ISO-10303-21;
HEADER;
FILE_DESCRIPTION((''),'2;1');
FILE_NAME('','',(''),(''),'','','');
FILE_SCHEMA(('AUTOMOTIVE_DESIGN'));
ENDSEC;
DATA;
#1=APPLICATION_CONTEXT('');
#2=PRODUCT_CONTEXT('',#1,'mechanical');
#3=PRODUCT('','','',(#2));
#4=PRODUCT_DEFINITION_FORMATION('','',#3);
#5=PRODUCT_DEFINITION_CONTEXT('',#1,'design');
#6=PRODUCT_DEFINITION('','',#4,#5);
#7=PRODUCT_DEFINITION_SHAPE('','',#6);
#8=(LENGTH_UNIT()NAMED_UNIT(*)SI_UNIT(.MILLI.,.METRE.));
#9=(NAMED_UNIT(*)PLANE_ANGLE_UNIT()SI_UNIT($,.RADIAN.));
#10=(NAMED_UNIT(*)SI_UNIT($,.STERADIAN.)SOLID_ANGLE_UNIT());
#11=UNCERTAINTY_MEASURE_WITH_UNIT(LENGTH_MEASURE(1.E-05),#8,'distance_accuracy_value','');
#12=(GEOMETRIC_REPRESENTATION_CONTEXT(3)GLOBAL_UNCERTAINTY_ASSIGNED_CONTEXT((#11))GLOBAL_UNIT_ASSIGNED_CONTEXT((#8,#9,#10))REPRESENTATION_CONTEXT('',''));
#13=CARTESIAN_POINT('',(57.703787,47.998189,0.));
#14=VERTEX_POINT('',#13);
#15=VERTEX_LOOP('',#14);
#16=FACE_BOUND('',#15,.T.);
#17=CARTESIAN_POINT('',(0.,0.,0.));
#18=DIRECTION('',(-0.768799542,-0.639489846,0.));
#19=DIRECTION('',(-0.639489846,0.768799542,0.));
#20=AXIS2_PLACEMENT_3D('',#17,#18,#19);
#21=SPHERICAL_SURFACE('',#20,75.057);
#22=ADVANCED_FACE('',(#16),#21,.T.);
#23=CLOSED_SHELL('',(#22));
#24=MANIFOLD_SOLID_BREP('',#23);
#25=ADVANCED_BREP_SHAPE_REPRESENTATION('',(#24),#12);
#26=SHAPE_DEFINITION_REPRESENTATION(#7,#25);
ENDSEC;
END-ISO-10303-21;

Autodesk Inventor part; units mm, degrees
ref_plane "YZ Plane" through (0, 0, 0) normal (1, 0, 0) x (0, 1, 0)
ref_plane "XZ Plane" through (0, 0, 0) normal (0, 1, 0) x (-1, 0, 0)
ref_plane "XY Plane" through (0, 0, 0) normal (0, 0, 1) x (1, 0, 0)
sketch "Sketch1" plane through (0, 0, 0) normal (0, 0, 1) x (1, 0, 0)
  circle A0 centre (0, 0) radius 75.057
  line L0 (57.7038, 47.9982) -> (-57.7038, -47.9982)
  dimension "d0" = 150.114
revolve "Revolution1" add sketch "Sketch1" angle 360 about axis through (57.7038, 47.9982, 0) along (-0.7687991, -0.6394904, 0) picked at (-27.2818, 33.6683) contours L0 A0
properties part number "FUEL" material "Rubber, Butyl"
